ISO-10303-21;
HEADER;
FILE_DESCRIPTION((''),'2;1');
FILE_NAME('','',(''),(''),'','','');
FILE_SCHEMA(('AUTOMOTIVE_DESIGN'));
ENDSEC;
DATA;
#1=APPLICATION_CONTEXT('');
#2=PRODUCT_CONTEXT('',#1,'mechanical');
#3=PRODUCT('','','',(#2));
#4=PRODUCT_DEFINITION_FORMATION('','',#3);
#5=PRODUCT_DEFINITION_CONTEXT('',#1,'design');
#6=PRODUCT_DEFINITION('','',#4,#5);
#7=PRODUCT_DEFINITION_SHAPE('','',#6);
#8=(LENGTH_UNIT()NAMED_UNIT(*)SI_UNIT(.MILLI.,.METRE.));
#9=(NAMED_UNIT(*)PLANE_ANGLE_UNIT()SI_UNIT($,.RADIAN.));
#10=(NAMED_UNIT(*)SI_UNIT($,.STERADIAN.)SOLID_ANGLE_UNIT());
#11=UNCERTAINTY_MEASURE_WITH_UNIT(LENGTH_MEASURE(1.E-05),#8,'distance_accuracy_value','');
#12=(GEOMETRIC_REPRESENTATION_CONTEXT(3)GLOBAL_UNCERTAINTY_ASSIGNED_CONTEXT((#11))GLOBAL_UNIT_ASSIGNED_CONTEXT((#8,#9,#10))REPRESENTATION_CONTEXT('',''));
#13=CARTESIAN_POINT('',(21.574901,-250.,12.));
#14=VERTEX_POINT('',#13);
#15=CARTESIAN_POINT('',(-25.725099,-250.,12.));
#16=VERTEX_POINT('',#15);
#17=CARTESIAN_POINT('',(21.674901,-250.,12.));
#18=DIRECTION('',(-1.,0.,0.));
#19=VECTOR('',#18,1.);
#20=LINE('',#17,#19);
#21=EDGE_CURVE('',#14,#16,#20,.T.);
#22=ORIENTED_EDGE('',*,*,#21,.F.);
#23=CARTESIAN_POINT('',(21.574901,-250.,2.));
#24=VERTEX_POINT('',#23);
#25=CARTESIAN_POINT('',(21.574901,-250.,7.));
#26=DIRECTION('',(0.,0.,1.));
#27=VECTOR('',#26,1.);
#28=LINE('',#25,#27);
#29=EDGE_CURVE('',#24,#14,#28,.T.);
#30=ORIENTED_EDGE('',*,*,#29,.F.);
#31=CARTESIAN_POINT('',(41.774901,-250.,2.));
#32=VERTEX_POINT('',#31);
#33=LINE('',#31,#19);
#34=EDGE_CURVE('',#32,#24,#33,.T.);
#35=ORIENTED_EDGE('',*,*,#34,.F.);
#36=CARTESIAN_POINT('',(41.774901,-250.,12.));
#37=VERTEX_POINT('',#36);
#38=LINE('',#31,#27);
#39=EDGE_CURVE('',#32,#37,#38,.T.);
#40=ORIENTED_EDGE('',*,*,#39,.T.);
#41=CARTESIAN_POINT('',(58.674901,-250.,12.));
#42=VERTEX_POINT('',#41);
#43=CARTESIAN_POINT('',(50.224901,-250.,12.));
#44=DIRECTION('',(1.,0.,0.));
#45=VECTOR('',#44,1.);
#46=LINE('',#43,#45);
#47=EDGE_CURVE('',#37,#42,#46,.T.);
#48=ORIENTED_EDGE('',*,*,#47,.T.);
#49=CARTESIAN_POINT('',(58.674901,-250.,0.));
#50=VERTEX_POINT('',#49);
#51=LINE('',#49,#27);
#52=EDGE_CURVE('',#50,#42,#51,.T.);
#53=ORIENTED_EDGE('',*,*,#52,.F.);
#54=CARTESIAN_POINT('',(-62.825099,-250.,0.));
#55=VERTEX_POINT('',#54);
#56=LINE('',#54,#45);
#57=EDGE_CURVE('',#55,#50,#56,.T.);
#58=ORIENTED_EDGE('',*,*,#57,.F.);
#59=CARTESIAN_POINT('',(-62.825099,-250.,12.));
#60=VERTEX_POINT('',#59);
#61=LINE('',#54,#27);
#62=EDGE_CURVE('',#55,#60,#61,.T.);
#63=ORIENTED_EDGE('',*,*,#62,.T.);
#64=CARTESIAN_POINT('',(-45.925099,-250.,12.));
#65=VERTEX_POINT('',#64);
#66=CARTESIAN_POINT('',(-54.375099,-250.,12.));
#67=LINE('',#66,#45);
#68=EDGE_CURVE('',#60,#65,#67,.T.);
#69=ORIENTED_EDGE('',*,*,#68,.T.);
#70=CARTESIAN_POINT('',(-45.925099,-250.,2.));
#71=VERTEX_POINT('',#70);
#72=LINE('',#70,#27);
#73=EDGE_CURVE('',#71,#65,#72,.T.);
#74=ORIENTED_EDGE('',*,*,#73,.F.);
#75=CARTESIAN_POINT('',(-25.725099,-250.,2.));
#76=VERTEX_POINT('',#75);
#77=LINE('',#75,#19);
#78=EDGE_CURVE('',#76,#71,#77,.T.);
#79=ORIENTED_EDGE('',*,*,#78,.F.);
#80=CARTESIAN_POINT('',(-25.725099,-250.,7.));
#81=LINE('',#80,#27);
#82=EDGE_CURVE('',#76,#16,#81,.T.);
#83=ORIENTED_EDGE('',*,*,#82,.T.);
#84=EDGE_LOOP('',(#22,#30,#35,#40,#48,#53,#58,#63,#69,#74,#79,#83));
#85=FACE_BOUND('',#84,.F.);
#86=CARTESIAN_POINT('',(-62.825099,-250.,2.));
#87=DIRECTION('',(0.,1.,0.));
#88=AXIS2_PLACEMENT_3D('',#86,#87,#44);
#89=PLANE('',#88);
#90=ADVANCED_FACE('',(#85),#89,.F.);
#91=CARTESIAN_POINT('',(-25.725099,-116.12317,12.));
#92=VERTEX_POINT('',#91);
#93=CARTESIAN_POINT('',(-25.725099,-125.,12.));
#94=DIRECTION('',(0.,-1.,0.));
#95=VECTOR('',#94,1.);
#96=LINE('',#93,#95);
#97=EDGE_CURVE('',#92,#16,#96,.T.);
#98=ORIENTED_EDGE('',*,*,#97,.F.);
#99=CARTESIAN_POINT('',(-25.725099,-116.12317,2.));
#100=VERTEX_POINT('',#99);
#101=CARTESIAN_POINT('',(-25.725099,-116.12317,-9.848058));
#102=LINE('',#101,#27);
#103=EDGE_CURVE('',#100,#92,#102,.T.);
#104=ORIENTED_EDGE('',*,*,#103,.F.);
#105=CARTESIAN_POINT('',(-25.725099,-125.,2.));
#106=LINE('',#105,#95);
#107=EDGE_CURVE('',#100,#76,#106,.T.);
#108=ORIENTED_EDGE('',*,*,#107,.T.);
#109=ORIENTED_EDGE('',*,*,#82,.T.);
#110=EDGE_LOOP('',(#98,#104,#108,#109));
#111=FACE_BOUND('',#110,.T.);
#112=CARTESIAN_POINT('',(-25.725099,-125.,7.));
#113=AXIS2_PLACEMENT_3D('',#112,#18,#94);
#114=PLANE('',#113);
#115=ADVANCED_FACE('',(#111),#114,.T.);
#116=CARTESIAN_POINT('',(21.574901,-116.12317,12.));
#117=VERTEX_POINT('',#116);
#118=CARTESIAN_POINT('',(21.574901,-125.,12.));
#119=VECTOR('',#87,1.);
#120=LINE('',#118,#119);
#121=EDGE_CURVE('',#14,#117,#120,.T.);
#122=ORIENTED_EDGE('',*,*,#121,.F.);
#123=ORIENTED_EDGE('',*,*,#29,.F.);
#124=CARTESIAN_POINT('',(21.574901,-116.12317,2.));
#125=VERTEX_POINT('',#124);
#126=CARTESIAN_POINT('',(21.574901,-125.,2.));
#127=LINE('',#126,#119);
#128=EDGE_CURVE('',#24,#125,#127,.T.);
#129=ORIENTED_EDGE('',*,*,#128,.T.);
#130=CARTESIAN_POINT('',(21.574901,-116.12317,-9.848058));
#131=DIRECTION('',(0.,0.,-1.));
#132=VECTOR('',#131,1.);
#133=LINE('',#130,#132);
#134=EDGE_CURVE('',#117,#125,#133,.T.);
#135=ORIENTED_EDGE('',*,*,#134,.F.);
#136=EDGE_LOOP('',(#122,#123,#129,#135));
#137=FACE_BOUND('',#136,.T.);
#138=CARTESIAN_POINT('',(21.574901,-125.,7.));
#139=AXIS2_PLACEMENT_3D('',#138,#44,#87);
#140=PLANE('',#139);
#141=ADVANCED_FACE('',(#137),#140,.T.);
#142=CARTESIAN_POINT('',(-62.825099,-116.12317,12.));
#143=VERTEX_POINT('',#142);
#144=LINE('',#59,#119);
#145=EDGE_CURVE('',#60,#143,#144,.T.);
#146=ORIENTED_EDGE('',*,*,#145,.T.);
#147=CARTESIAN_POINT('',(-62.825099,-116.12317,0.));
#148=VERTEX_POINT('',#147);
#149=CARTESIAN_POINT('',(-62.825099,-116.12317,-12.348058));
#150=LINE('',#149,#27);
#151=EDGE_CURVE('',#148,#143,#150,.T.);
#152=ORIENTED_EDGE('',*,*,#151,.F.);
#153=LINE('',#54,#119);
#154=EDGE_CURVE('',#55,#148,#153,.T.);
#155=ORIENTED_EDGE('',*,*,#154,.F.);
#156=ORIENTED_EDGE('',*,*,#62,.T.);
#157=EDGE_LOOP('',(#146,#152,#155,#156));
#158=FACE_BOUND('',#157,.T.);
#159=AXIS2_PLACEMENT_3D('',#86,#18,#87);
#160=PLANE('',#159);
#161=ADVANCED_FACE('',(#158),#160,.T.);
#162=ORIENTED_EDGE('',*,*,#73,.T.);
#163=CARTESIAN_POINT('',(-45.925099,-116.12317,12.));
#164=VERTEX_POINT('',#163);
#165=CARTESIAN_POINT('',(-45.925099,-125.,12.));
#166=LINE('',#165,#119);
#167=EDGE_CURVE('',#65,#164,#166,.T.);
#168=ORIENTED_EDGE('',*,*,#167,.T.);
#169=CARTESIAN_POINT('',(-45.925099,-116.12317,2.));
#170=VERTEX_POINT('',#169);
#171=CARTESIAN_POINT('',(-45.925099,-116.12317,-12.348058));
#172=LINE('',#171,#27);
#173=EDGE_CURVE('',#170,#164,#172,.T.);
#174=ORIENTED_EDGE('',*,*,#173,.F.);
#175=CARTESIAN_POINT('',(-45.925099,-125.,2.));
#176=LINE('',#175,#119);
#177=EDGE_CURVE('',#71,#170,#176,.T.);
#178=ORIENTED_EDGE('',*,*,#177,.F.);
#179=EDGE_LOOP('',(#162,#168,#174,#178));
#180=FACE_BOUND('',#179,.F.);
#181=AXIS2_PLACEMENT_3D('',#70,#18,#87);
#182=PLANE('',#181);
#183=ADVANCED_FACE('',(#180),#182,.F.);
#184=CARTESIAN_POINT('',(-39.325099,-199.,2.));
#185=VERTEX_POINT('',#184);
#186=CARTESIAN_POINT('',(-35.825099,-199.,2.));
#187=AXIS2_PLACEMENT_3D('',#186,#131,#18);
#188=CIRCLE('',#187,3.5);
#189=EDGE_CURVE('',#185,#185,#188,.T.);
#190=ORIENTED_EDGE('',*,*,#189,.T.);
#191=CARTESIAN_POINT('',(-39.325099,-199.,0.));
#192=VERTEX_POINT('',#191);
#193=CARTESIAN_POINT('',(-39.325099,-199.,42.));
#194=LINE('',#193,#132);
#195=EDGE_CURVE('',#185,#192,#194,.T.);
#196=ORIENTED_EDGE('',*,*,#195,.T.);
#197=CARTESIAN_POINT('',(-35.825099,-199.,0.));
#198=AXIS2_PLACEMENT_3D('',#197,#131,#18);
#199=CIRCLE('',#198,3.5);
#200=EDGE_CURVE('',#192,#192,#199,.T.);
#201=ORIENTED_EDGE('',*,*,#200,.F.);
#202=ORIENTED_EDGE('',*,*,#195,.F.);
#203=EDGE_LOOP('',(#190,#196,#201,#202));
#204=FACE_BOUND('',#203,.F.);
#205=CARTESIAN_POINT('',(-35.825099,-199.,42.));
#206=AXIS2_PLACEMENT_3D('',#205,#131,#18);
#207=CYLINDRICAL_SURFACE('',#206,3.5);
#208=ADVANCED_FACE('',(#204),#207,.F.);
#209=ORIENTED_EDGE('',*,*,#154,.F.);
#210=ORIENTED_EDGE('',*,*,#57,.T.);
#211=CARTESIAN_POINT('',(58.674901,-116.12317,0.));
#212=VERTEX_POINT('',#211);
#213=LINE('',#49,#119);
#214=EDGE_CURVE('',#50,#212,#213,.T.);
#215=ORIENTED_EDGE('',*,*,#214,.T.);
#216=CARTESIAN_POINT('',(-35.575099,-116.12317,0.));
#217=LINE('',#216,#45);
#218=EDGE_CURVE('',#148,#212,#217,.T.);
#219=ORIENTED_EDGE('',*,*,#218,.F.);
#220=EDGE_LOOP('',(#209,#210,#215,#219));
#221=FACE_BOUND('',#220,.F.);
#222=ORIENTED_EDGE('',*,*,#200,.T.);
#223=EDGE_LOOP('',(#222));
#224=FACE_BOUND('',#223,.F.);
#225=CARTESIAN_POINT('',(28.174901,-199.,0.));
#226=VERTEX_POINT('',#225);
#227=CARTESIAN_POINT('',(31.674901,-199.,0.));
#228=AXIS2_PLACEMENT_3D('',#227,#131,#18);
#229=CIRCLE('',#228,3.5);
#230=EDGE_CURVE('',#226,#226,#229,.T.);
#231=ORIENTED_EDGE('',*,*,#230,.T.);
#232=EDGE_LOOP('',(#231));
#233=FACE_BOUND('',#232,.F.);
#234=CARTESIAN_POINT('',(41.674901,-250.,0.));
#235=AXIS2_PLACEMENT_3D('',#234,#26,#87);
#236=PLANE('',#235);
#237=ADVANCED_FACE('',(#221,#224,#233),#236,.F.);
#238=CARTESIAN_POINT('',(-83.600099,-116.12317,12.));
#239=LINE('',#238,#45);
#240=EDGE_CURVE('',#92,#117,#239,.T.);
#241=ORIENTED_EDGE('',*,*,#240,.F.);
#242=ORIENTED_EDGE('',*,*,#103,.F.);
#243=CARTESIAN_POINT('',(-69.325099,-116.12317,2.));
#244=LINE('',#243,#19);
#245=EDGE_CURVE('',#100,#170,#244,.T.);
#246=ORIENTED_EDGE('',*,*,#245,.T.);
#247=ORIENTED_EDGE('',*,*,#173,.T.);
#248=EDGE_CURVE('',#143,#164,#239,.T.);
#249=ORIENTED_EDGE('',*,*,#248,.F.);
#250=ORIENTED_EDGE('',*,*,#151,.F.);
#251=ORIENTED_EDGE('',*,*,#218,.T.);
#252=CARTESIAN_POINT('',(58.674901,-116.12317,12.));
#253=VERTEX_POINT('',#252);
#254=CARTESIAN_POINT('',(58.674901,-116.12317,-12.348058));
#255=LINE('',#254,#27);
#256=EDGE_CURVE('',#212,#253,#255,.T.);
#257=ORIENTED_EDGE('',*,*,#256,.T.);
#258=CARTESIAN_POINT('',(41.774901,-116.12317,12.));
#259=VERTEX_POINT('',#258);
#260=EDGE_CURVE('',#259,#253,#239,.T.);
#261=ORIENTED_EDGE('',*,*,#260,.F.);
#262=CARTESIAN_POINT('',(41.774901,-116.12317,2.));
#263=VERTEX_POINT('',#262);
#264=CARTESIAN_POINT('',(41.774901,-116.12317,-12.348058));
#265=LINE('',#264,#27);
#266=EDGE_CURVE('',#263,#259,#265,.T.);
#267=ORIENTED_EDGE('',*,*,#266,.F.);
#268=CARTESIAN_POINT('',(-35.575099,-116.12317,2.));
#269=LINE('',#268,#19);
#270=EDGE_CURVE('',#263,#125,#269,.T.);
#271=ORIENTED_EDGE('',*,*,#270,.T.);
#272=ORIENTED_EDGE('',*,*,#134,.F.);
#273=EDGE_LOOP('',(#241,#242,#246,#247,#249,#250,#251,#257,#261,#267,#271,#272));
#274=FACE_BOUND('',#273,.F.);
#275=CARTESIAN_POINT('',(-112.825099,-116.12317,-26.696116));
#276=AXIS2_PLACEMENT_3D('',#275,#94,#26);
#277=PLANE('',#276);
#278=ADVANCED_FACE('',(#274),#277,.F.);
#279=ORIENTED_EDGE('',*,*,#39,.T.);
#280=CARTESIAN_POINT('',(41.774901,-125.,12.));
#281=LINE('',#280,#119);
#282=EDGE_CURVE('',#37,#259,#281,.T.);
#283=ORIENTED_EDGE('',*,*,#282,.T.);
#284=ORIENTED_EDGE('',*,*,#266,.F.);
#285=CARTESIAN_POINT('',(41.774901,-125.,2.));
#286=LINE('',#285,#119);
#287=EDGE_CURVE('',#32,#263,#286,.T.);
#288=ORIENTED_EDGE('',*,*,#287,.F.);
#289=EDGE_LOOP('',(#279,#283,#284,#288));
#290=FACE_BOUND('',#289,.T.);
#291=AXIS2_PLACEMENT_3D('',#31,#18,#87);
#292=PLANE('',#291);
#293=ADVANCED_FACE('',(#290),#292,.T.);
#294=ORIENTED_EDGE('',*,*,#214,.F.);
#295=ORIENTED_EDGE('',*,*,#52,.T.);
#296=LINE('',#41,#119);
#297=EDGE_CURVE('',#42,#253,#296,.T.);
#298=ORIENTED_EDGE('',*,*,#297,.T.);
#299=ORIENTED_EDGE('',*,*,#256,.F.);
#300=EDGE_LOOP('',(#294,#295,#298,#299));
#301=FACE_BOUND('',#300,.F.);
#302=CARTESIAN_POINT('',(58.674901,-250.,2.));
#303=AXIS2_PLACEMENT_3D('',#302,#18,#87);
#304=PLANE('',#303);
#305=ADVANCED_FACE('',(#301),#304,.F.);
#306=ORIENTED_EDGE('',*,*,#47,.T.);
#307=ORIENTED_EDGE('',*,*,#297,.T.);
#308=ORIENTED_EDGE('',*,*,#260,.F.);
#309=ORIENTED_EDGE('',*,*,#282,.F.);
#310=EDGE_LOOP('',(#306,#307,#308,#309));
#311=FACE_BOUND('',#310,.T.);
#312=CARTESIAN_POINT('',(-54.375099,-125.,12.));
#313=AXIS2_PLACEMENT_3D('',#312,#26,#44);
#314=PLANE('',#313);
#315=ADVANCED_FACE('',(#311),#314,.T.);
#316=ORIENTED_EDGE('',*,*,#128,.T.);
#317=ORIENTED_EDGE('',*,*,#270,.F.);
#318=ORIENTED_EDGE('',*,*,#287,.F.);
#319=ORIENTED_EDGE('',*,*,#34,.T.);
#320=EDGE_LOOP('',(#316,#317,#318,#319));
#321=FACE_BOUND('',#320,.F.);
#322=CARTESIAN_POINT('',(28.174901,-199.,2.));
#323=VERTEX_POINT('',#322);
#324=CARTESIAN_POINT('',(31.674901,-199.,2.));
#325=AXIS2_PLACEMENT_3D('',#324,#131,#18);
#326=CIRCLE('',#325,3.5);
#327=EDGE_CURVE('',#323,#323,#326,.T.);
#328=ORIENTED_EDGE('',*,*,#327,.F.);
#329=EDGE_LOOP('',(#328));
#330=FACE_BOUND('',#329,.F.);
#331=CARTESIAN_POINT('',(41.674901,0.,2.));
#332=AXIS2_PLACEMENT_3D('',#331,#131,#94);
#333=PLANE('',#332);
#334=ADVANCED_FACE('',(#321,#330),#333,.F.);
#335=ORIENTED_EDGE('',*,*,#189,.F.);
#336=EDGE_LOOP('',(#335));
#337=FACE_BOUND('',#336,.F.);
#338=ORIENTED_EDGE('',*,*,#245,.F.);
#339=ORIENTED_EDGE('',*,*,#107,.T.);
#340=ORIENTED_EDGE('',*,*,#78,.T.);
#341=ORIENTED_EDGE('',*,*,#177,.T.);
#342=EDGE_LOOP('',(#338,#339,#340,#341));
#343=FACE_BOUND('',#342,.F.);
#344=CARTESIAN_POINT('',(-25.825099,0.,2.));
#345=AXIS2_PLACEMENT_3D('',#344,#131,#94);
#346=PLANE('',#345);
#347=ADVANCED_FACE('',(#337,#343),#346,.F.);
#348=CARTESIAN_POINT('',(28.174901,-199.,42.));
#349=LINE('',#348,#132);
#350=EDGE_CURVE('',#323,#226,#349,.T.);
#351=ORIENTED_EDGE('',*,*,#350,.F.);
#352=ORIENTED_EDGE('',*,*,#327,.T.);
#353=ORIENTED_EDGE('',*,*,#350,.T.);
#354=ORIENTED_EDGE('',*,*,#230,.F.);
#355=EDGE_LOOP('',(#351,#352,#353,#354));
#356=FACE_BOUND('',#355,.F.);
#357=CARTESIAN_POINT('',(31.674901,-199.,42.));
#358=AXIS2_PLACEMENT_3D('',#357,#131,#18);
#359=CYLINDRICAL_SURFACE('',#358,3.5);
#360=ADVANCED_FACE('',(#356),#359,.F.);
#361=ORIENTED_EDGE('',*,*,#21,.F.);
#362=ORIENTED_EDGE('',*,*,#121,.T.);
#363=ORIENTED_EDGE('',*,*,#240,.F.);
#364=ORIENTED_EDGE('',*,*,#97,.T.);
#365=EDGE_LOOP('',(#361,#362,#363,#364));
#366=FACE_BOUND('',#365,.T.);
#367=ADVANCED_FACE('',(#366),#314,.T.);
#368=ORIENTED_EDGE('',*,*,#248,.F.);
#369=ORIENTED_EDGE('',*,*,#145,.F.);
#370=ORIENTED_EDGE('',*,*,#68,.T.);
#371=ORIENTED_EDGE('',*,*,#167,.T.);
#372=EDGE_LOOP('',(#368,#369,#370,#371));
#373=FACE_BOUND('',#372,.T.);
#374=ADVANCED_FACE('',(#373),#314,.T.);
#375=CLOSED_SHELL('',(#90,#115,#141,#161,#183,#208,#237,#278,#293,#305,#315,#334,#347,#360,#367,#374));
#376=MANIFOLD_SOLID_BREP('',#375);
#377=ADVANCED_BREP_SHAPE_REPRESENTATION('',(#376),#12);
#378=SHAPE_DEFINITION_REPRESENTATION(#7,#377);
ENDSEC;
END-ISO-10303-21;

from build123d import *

# Parameters (mm, degrees)
F1_DEPTH  = 250
F2_W      = 87.5
F2_H      = 12
F3_DEPTH  = 20
F5_D      = 7
F5_DEPTH  = 40
F5_TIP    = 2.1030121666
F7_DEPTH  = 17
F8_DEPTH  = 17
F9_W      = 16.9
F9_H      = 250
F10_DEPTH = 10
F11_W     = 16.9
F11_H     = 250
F12_DEPTH = 10
F14_DEPTH = 25
F15_R     = 5
F18_W     = 250
F18_H     = 10
F19_DEPTH = 0.1
F20_W     = 250
F20_H     = 10
F21_DEPTH = 0.1
F22_W     = 143.5878481716
F22_H     = 63.6908710003
F23_DEPTH = 259


with BuildPart() as f1:
    # F0 (on Front) → F1 (new body)
    with BuildSketch(Plane.XZ):
        Polygon((-45.825098525, 2), (-45.825098525, 0), (41.674901475, 0), (41.674901475, 2), (21.674901475, 2), (21.674901475, 12), (-25.825098525, 12), (-25.825098525, 2), align=None)
    extrude(amount=F1_DEPTH)

    # F2 (on face) → F3 (join)
    with BuildSketch(Plane(origin=(0, 0, 0), x_dir=(-1, 0, 0), z_dir=(0, 1, 0))):
        with Locations((2.075098525, 6)):
            Rectangle(F2_W, F2_H)
    extrude(amount=F3_DEPTH)

    # F5
    with Locations(Plane.XY.offset(2)):
        with Locations((-35.825098525, -51), (31.674901475, -199), (31.674901475, -51), (-35.825098525, -199)):
            Hole(F5_D / 2, depth=F5_DEPTH)
            with Locations((0, 0, -(F5_DEPTH + F5_TIP / 2))):  # 118° drill point
                Cone(0, F5_D / 2, F5_TIP, mode=Mode.SUBTRACT)

    # F7 (add): a face of the model
    f7_faces = [f1.faces().sort_by_distance(p)[0] for p in [
        (-45.825098525, -125, 1.7297334649),
    ]]
    extrude(f7_faces, amount=F7_DEPTH)

    # F6 (on face) → F8 (join)
    with BuildSketch(Plane.YZ.offset(41.674901475)):
        Polygon((0, 2), (-250, 2), (-250, 0), (20, 0), (20, 12), (0, 12), align=None)
    extrude(amount=F8_DEPTH)

    # F9 (on face) → F10 (join)
    with BuildSketch(Plane.XY.offset(2)):
        with Locations((50.224901475, -125)):
            Rectangle(F9_W, F9_H)
    extrude(amount=F10_DEPTH)

    # F11 (on face) → F12 (join)
    with BuildSketch(Plane.XY.offset(2)):
        with Locations((-54.375098525, -125)):
            Rectangle(F11_W, F11_H)
    extrude(amount=F12_DEPTH)

    # F13 (on face) → F14 (cut)
    with BuildSketch(Plane.XY.offset(12)):
        with BuildLine():
            ThreePointArc((-62.825098525, 0), (-37.10740093, 13.9610044228), (-8.4745501026, 20))
            Line((-8.4745501026, 20), (-62.825098525, 20))
            Line((-62.825098525, 20), (-62.825098525, 0))
        make_face()
        with BuildLine():
            ThreePointArc((4.3243530527, 20), (32.95720388, 13.9610044228), (58.674901475, 0))
            Line((58.674901475, 0), (58.674901475, 20))
            Line((58.674901475, 20), (4.3243530527, 20))
        make_face()
    extrude(amount=-F14_DEPTH, mode=Mode.SUBTRACT)

    # F15
    f15_edges = [f1.edges().sort_by_distance(p)[0] for p in [
        (-37.107401, 13.961004, 12),
        (-2.075099, 20, 12),
        (32.957204, 13.961004, 12),
    ]]
    fillet(f15_edges, radius=F15_R)

    # F18 (on face) → F19 (cut)
    with BuildSketch(Plane.YZ.offset(21.674901475)):
        with Locations((-125, 7)):
            Rectangle(F18_W, F18_H)
    extrude(amount=-F19_DEPTH, mode=Mode.SUBTRACT)

    # F20 (on face) → F21 (cut)
    with BuildSketch(Plane(origin=(-25.825098525, 0, 0), x_dir=(0, -1, 0), z_dir=(-1, 0, 0))):
        with Locations((125, 7)):
            Rectangle(F20_W, F20_H)
    extrude(amount=-F21_DEPTH, mode=Mode.SUBTRACT)

    # F22 (on offset) → F23 (cut)
    with BuildSketch(Plane(origin=(-112.825098525, 0, 0), x_dir=(0, -1, 0), z_dir=(-1, 0, 0))):
        with Locations((44.3292455748, 5.149319768)):
            Rectangle(F22_W, F22_H)
    extrude(amount=-F23_DEPTH, mode=Mode.SUBTRACT)


solid = f1.part
